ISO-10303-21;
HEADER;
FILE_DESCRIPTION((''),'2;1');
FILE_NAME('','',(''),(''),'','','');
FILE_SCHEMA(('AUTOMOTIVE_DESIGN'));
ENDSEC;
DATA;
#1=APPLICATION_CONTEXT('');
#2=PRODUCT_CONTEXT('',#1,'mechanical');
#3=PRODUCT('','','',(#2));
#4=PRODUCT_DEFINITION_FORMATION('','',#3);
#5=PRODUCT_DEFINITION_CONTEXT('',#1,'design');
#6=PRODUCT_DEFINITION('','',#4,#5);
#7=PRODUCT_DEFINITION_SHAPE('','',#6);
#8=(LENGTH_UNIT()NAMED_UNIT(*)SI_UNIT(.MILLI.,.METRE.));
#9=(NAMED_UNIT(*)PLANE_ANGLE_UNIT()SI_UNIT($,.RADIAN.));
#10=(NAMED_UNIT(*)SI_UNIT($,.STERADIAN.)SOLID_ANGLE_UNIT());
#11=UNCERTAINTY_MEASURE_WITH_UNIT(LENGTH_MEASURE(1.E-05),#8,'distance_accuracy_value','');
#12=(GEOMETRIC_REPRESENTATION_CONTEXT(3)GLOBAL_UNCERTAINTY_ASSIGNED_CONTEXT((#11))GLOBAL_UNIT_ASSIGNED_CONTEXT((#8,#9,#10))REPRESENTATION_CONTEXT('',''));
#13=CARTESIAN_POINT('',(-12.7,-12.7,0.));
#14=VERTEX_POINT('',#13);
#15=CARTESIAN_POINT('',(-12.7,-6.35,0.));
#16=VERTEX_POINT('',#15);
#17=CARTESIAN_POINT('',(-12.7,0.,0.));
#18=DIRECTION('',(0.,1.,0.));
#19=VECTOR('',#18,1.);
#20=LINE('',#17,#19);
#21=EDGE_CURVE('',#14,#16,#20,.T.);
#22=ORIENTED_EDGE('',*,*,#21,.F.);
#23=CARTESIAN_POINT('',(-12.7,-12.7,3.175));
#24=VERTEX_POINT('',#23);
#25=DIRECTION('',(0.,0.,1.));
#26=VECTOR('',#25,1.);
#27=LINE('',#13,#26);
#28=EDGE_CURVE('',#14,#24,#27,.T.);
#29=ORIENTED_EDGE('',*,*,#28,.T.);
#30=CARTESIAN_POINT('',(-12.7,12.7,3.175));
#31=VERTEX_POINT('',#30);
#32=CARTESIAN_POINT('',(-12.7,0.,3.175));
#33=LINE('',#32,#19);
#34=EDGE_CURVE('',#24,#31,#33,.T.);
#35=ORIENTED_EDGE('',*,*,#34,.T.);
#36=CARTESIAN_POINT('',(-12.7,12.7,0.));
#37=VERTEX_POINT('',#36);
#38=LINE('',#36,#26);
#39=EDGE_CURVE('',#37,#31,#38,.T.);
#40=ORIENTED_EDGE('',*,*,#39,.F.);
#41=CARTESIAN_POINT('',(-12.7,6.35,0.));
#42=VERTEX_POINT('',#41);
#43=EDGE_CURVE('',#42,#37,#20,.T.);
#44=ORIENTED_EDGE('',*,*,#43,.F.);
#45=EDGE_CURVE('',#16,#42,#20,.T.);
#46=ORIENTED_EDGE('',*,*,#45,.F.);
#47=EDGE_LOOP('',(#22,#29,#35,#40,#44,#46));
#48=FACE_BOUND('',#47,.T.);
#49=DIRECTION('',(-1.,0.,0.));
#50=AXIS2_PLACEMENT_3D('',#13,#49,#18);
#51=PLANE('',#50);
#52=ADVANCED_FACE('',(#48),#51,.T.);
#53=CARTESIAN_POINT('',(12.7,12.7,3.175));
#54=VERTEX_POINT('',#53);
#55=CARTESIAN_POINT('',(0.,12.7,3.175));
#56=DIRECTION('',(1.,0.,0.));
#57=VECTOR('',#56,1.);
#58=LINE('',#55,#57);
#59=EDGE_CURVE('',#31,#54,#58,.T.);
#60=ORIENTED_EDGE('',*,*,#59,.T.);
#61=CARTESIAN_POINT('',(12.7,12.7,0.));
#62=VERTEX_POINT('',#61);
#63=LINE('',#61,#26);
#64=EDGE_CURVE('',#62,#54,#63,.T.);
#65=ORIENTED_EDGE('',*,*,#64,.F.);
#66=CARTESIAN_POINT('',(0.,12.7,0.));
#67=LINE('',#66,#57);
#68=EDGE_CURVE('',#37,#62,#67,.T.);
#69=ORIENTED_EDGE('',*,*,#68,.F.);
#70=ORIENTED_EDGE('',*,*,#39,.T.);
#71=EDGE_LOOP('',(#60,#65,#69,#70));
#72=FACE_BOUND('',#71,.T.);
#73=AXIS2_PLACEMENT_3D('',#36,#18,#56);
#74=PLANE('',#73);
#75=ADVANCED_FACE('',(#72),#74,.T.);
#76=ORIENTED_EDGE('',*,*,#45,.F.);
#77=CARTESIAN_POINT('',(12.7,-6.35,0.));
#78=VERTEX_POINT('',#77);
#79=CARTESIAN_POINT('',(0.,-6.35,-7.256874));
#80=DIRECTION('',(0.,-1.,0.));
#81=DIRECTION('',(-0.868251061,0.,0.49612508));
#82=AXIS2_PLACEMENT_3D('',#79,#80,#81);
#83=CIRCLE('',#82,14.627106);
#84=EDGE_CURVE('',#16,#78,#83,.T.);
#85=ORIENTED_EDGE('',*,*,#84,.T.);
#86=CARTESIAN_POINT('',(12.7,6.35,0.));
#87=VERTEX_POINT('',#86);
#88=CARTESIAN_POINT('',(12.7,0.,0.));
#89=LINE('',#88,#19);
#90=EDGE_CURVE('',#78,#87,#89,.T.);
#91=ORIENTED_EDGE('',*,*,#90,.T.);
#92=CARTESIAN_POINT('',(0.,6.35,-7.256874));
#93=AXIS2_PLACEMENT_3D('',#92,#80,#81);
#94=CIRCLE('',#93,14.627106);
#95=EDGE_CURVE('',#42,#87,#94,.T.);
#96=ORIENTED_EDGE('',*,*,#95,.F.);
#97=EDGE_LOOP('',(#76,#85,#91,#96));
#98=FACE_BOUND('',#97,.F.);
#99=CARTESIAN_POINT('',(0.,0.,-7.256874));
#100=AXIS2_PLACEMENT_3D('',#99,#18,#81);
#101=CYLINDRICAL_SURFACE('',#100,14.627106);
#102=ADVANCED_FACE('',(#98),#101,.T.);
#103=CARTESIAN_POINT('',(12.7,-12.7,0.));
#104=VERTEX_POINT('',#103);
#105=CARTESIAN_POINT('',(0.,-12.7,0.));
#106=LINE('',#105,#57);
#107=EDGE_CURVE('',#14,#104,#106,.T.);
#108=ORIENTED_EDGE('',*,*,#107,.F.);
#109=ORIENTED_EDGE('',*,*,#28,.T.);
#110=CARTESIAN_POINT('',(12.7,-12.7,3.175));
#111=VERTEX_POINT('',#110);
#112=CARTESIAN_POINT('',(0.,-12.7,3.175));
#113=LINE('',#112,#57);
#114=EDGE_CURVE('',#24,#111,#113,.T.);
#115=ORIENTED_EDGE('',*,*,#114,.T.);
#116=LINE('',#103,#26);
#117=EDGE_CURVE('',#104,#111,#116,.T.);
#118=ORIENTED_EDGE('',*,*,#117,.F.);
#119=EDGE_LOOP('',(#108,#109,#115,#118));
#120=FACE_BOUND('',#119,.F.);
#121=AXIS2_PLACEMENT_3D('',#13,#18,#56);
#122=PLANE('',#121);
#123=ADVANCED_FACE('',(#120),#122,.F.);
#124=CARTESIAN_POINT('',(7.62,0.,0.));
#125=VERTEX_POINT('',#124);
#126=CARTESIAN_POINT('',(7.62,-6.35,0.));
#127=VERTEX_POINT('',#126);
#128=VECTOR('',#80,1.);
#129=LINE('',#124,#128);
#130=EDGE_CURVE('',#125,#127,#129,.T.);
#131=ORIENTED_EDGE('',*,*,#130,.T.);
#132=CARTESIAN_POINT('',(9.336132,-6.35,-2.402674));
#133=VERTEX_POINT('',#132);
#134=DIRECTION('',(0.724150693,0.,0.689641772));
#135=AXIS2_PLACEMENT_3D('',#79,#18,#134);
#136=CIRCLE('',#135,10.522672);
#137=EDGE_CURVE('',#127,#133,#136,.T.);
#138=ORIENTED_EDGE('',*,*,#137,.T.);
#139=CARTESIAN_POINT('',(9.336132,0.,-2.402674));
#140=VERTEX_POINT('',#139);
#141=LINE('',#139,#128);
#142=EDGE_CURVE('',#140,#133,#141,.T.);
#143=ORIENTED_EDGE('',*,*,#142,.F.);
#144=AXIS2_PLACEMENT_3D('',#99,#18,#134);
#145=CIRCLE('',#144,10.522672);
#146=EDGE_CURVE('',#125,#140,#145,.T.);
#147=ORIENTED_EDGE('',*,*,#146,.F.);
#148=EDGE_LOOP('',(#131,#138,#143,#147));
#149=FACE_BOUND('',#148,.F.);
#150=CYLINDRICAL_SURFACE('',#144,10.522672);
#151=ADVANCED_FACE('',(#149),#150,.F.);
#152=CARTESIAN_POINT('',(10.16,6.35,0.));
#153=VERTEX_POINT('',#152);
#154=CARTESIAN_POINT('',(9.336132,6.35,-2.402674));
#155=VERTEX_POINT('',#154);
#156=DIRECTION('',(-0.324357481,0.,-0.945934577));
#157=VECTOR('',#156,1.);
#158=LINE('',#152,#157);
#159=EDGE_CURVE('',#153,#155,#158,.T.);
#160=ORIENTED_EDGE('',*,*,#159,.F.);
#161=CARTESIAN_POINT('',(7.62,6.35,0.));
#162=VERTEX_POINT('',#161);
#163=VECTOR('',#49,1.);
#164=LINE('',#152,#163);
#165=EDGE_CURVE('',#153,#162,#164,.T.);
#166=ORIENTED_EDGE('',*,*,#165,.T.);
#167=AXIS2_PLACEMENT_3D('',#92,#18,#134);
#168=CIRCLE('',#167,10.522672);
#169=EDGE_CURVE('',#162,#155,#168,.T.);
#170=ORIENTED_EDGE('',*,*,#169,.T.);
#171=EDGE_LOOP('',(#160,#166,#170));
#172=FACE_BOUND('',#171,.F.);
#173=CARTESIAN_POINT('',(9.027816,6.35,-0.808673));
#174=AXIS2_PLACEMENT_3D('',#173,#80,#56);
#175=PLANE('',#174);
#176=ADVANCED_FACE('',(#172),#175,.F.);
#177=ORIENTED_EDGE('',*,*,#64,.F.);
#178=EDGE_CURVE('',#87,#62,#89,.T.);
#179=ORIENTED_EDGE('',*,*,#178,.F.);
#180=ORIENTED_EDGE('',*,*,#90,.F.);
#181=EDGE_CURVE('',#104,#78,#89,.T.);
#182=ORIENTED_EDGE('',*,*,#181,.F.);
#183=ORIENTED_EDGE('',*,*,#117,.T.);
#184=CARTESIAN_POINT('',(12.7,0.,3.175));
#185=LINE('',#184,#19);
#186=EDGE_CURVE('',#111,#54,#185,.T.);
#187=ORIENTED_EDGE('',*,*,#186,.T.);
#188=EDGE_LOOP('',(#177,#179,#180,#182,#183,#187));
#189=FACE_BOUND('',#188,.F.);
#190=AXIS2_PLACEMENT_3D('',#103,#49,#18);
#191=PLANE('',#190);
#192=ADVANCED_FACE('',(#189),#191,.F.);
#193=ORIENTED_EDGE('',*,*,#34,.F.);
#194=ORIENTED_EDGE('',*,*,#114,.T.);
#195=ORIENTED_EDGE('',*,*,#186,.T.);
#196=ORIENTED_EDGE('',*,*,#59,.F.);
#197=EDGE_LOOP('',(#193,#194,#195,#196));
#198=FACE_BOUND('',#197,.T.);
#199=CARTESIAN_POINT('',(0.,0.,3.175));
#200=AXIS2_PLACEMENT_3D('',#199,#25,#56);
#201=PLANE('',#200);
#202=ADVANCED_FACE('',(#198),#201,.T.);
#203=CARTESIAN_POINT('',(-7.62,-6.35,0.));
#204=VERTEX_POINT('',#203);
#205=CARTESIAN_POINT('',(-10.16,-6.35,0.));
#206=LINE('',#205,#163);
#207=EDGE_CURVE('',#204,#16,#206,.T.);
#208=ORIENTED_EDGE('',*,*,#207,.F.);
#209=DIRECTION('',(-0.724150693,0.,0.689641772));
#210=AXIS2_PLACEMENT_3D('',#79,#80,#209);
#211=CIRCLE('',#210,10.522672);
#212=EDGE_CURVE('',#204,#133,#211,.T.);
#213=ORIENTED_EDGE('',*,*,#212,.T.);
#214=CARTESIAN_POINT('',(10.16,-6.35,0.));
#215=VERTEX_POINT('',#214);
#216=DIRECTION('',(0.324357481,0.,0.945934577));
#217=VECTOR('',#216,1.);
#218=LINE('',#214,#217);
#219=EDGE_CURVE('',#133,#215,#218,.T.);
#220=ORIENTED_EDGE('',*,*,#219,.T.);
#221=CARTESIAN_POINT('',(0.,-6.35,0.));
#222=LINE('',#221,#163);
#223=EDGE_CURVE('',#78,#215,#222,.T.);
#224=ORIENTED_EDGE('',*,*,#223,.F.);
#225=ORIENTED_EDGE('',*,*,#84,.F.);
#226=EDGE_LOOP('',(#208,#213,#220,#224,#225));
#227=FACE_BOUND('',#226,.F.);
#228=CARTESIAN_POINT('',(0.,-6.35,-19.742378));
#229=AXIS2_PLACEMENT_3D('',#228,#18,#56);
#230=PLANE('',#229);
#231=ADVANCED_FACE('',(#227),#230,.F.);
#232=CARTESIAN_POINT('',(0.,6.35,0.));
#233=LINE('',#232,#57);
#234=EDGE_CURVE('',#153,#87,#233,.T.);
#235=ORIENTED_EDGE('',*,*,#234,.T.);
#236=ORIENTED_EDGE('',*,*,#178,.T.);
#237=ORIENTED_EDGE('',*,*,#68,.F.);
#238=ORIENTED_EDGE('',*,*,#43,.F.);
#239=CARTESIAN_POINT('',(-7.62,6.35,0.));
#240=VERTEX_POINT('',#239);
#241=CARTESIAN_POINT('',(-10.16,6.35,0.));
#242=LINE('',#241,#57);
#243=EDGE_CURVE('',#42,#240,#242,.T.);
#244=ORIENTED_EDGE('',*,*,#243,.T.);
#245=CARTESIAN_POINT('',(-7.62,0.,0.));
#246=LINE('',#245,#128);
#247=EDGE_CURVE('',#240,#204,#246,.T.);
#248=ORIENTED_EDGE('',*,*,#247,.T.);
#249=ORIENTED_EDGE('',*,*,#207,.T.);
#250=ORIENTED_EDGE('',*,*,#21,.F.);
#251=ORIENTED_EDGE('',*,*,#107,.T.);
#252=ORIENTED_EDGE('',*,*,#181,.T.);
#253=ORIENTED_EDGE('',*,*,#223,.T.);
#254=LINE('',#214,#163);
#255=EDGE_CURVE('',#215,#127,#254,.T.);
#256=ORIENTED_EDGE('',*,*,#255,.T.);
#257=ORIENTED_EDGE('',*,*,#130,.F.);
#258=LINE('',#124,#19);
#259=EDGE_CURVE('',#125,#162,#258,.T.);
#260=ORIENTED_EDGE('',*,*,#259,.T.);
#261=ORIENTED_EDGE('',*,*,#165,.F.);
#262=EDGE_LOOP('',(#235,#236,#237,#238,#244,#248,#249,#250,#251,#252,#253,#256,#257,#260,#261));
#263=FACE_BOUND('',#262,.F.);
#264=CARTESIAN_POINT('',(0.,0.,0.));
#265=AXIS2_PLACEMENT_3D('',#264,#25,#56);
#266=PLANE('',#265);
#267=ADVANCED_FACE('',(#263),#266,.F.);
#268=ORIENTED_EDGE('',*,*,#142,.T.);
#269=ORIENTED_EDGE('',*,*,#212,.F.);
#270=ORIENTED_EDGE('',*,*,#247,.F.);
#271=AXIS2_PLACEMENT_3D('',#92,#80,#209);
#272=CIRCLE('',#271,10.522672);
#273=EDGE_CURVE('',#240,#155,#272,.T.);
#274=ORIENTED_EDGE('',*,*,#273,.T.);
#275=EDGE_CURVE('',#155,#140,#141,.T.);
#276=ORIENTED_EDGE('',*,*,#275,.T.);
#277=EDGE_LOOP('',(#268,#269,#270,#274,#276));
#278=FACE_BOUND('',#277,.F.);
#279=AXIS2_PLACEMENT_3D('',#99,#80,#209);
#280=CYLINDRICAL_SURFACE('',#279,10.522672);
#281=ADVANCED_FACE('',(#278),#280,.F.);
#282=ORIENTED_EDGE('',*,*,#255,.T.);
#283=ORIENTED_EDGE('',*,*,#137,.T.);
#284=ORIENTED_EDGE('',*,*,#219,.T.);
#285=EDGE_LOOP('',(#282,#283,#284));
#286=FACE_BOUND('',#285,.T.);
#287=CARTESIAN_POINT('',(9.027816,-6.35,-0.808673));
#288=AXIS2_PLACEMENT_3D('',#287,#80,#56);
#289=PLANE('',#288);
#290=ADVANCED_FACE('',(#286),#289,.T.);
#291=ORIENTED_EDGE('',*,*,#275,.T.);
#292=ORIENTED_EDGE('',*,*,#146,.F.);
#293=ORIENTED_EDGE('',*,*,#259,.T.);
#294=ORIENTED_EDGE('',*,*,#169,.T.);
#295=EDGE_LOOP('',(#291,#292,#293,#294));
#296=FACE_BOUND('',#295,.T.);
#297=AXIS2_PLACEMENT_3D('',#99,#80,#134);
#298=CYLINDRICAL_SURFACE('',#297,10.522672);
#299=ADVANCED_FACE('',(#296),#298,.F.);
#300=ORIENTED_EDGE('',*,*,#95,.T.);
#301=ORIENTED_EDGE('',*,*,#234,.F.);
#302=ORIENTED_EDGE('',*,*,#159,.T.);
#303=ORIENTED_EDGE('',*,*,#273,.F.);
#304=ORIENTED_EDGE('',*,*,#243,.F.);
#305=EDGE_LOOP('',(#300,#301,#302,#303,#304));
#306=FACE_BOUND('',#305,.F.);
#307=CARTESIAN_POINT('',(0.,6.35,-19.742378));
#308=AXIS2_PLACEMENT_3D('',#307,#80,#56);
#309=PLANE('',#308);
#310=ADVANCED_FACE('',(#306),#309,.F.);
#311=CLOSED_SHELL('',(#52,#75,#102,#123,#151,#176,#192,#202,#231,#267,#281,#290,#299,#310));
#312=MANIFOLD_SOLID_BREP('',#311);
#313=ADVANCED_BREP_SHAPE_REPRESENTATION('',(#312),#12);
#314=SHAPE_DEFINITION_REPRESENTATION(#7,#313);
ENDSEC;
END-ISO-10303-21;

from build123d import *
from build123d import SkipClean  # not in build123d's __all__

# Parameters (mm, degrees)
F0_W          = 25.4
F0_H          = 25.4
F1_DEPTH      = 3.175
F3_W          = 5.08
F3_H          = 12.7
F6_DEPTH      = 6.35
F6_DEPTH_BACK = 6.35


with BuildPart() as f1:
    # F0 (on Top) → F1 (new body)
    with BuildSketch(Plane.XY):
        Rectangle(F0_W, F0_H)
    extrude(amount=F1_DEPTH)

    # F4: sweep along a path in F2
    with BuildLine(Plane.XZ) as f4_path:
        ThreePointArc((-10.16, 0), (0, -19.7423783289), (10.16, 0))
    # F3 (on face) → F4 (sweep)
    with BuildSketch(Plane(origin=(0, 0, 0), x_dir=(1, 0, 0), z_dir=(0, 0, -1))):
        with Locations((-10.16, 0)):
            Rectangle(F3_W, F3_H)
    sweep(path=f4_path.line)

    # F5 (on Front) → F6 (join, two sides)
    with BuildSketch(Plane.XZ) as f6_sk:
        with BuildLine():
            Line((9.3361319986, -2.4026738264), (10.16, 0))
            Line((10.16, 0), (7.62, 0))
            ThreePointArc((7.62, 0), (8.5627573519, -1.1408453315), (9.3361319986, -2.4026738264))
        make_face()
    with SkipClean():  # cleaning this boolean's faces spoils the solid; the shape is the same uncleaned
        extrude(amount=F6_DEPTH)
        extrude(f6_sk.sketch, amount=-F6_DEPTH_BACK)


solid = f1.part
